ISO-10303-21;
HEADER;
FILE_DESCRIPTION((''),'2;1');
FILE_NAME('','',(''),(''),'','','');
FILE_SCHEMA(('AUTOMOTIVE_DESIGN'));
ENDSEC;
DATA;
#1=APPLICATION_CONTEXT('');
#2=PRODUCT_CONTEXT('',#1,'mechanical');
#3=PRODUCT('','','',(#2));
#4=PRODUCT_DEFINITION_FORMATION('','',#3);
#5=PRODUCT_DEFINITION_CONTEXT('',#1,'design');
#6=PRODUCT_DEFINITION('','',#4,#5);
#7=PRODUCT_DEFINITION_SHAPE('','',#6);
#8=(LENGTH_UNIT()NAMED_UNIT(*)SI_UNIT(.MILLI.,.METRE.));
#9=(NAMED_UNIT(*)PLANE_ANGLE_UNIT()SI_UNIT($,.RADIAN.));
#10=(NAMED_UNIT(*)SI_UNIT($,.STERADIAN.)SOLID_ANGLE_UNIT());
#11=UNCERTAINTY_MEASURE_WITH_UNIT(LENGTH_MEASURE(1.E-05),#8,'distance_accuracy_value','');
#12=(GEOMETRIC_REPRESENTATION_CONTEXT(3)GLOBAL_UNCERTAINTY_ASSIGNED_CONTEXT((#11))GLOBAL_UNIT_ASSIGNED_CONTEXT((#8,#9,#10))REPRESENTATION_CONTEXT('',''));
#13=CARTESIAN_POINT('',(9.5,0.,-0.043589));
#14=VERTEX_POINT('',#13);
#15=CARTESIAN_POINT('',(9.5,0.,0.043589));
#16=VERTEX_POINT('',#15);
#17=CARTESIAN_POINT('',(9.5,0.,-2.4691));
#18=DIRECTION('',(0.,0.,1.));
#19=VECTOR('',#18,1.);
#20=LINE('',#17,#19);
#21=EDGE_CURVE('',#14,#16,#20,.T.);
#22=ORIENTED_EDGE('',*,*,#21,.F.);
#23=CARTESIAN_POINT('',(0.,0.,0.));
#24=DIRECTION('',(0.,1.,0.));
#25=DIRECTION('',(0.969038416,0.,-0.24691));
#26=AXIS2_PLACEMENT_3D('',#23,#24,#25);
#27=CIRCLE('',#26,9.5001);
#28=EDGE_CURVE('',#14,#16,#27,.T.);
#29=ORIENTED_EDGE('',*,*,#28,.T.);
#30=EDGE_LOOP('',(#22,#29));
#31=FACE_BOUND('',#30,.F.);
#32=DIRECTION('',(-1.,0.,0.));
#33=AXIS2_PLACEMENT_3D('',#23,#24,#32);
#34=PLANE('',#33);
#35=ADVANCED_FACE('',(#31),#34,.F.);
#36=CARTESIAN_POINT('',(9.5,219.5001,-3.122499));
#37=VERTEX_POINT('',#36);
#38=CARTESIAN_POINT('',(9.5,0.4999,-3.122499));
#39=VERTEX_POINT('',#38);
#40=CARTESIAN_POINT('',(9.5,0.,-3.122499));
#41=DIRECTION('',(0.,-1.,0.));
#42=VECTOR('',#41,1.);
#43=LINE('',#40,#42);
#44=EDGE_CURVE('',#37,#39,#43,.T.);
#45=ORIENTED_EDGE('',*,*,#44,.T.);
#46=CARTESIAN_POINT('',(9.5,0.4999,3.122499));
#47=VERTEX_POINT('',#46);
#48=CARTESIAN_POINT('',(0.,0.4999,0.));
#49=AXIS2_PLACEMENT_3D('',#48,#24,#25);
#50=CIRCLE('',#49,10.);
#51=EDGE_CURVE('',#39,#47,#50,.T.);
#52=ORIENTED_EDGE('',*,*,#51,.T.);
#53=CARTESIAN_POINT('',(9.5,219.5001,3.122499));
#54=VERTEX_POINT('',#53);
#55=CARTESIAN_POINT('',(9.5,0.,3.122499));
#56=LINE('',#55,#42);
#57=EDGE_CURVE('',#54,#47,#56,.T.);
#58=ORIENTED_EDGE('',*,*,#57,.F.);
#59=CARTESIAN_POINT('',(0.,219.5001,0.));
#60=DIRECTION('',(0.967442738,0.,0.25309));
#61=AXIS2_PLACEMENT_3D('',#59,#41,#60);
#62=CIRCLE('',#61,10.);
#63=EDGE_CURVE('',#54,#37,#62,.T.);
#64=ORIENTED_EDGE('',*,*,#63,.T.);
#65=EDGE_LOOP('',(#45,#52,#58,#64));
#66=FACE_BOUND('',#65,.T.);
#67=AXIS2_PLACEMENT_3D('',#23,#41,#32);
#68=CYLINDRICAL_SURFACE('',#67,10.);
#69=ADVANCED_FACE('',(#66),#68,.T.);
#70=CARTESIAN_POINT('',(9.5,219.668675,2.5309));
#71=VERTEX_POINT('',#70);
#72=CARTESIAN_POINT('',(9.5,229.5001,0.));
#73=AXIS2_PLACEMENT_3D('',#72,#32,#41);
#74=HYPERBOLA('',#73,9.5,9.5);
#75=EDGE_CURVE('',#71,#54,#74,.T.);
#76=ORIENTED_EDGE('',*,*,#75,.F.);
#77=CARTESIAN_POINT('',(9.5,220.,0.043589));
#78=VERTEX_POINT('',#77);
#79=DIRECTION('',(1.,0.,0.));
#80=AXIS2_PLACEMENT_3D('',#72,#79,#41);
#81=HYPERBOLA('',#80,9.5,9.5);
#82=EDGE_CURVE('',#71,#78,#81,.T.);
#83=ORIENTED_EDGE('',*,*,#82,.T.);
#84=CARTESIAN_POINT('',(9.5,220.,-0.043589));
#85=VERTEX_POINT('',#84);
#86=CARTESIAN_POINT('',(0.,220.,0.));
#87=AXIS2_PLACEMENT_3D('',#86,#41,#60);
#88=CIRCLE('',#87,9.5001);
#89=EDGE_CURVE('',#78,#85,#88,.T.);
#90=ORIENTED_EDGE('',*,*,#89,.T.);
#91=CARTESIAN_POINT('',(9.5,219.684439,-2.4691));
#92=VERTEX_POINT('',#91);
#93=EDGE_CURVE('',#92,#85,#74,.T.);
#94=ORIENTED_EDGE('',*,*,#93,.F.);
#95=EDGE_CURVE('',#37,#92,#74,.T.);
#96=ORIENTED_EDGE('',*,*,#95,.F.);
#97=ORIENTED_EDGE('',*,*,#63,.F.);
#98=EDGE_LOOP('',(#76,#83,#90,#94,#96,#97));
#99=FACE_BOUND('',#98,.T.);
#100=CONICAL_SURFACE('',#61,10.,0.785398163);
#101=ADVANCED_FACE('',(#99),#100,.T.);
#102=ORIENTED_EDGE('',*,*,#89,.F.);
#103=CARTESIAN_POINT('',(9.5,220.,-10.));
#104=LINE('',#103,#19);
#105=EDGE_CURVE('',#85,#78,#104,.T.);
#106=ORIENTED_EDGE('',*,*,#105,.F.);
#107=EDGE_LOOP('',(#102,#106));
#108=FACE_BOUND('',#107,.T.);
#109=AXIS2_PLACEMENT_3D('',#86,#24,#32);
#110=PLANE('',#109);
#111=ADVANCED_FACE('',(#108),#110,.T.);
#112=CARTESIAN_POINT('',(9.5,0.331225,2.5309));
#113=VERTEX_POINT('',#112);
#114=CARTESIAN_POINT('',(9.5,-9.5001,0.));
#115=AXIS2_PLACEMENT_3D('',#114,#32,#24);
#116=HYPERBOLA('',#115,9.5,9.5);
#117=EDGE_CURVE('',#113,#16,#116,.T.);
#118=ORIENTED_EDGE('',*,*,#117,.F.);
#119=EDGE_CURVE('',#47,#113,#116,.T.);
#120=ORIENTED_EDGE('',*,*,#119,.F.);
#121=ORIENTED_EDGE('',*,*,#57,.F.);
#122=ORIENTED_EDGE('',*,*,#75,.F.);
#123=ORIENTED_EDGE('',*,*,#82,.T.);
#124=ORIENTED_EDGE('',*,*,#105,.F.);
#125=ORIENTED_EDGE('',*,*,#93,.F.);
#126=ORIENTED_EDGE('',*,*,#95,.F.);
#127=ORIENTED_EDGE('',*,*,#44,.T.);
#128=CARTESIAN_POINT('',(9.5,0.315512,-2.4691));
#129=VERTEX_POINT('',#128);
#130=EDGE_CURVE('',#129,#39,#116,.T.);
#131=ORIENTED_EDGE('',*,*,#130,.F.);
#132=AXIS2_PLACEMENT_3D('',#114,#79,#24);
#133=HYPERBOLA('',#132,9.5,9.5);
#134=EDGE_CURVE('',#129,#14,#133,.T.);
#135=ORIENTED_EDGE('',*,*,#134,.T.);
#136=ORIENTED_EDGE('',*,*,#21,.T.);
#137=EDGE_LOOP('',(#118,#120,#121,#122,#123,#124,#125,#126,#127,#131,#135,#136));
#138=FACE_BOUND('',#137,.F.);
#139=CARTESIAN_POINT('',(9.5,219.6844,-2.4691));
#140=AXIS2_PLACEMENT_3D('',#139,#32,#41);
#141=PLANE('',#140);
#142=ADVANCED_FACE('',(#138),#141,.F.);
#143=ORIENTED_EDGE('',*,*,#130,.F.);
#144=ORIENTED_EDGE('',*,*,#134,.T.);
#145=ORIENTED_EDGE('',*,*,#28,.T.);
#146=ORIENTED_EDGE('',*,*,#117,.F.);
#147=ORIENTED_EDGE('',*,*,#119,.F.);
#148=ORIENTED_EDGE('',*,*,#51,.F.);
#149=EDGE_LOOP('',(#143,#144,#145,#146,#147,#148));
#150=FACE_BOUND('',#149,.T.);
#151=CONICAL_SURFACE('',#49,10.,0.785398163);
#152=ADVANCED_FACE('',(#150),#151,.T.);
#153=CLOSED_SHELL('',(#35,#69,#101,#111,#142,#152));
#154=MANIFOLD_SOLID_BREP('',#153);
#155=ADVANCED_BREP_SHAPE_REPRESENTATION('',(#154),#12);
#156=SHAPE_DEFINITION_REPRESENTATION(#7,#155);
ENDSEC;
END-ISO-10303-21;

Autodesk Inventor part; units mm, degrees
ref_plane "XZ Plane" through (0, 0, 0) normal (0, 1, 0) x (-1, 0, 0)
ref_plane "XY Plane" through (0, 0, 0) normal (0, 0, 1) x (1, 0, 0)
sketch "Sketch1" plane through (0, 0, 0) normal (0, 1, 0) x (-1, 0, 0)
  circle A0 centre (0, 0) radius 10
  dimension "d0" = 20
extrude "Extrusion1" add sketch "Sketch1" along normal blind 220
ref_plane "Work Plane1" through (10, 0, 0) normal (1, 0, 0) x (0, 1, 0)
sketch "Sketch2" plane through (10, 0, 0) normal (1, 0, 0) x (0, 1, 0)
  line L0 (220, -10) -> (220, 10) projected
  line L1 (0, -10) -> (0, 10) projected
  line L2 (0, 0) -> (132.5, 0)
  circle A0 centre (132.5, 0) radius 1.25
  circle A1 centre (132.5, 0) radius 0.5
  circle A2 centre (132.5, 0.0309) radius 2.5
  line L3 (0, -10) -> (0, 10) projected
  line L4 (132.5, -2.4691) -> (0, -2.4691)
  line L5 (0, -2.4691) -> (0, 2.5309)
  line L6 (0, 2.5309) -> (132.5, 2.5309)
  line L7 (132.5, 2.5309) -> (132.5, -2.4691)
  line L8 (220, -10) -> (220, 10) projected
  line L9 (132.5, -2.4691) -> (220, -2.4691)
  line L10 (220, -2.4691) -> (220, 2.5309)
  line L11 (220, 2.5309) -> (132.5, 2.5309)
  line L12 (132.5, 2.5309) -> (132.5, -2.4691)
  dimension "d21" = 5
  dimension "d3" = 132.5
  dimension "d4" = 2.5
  dimension "d5" = 1
extrude "Extrusion2" cut sketch "Sketch2" against normal blind 0.5
sketch "Sketch3" plane through (9.5, 0, 0) normal (1, 0, 0) x (0, 0, -1)
  line L0 (2.4691, 0) -> (-2.5309, 0) projected
  circle A0 centre (-0.0309, 132.5) radius 0.75
  circle A1 centre (-0.0309, 132.5) radius 1.25
  line L1 (2.4691, 220) -> (2.4691, 0) projected
  line L2 (-2.5309, 220) -> (2.4691, 220) projected
  line L3 (-2.5309, 0) -> (-2.5309, 220) projected
  point P0 (0, 0)
  dimension "d24" = 1.5
  dimension "d25" = 2.5
extrude "Extrusion4" [suppressed]
chamfer "Chamfer5" [suppressed]
chamfer "Chamfer6" distance 0.5 angle 45 2 edges at (-9.9999, 220, -0.0319) (-9.9999, 0, -0.0319)
sketch "Sketch4" plane through (9.5, 0.3156, -2.4691) normal (0, 0, 1) x (1, 0, 0)
  spline S0 degree 2 poles (0.1904, 0.1843) (0.0943, 0.0912) (0, -0.0001) knots 0 0 0 1 1 1 weights 1 1.000046 1 projected
  line L0 (0.1904, 219.1844) -> (0.1904, 0.1844) projected
  spline S1 degree 4 poles (0, 219.3688) (0.0476, 219.3228) (0.0952, 219.2767) (0.1428, 219.2306) (0.1904, 219.1845) knots 0 0 0 0 0 1 1 1 1 1 projected
  line L1 (0, 219.3687) -> (0, 0) projected
  point P0 (-9.5, -0.3156)
extrude "Extrusion5" cut sketch "Sketch4" against normal blind 10
sketch "Sketch5" plane through (9.5, 0.3313, 2.5309) normal (0, 0, -1) x (-1, 0, 0)
  spline S0 degree 2 poles (0, -0.0001) (-0.0865, 0.0835) (-0.1744, 0.1686) knots 0 0 0 1 1 1 weights 1 1.000039 1 projected
  line L0 (0, 0) -> (0, 219.3373) projected
  spline S1 degree 2 poles (-0.1744, 219.1688) (-0.0865, 219.2539) (0, 219.3374) knots 0 0 0 1 1 1 weights 1 1.000039 1 projected
  line L1 (-0.1744, 0.1687) -> (-0.1744, 219.1687) projected
  point P0 (9.5, -0.3313)
extrude "Extrusion6" cut sketch "Sketch5" against normal blind 10
properties part number "wał_półkola" material "Stainless Steel"
